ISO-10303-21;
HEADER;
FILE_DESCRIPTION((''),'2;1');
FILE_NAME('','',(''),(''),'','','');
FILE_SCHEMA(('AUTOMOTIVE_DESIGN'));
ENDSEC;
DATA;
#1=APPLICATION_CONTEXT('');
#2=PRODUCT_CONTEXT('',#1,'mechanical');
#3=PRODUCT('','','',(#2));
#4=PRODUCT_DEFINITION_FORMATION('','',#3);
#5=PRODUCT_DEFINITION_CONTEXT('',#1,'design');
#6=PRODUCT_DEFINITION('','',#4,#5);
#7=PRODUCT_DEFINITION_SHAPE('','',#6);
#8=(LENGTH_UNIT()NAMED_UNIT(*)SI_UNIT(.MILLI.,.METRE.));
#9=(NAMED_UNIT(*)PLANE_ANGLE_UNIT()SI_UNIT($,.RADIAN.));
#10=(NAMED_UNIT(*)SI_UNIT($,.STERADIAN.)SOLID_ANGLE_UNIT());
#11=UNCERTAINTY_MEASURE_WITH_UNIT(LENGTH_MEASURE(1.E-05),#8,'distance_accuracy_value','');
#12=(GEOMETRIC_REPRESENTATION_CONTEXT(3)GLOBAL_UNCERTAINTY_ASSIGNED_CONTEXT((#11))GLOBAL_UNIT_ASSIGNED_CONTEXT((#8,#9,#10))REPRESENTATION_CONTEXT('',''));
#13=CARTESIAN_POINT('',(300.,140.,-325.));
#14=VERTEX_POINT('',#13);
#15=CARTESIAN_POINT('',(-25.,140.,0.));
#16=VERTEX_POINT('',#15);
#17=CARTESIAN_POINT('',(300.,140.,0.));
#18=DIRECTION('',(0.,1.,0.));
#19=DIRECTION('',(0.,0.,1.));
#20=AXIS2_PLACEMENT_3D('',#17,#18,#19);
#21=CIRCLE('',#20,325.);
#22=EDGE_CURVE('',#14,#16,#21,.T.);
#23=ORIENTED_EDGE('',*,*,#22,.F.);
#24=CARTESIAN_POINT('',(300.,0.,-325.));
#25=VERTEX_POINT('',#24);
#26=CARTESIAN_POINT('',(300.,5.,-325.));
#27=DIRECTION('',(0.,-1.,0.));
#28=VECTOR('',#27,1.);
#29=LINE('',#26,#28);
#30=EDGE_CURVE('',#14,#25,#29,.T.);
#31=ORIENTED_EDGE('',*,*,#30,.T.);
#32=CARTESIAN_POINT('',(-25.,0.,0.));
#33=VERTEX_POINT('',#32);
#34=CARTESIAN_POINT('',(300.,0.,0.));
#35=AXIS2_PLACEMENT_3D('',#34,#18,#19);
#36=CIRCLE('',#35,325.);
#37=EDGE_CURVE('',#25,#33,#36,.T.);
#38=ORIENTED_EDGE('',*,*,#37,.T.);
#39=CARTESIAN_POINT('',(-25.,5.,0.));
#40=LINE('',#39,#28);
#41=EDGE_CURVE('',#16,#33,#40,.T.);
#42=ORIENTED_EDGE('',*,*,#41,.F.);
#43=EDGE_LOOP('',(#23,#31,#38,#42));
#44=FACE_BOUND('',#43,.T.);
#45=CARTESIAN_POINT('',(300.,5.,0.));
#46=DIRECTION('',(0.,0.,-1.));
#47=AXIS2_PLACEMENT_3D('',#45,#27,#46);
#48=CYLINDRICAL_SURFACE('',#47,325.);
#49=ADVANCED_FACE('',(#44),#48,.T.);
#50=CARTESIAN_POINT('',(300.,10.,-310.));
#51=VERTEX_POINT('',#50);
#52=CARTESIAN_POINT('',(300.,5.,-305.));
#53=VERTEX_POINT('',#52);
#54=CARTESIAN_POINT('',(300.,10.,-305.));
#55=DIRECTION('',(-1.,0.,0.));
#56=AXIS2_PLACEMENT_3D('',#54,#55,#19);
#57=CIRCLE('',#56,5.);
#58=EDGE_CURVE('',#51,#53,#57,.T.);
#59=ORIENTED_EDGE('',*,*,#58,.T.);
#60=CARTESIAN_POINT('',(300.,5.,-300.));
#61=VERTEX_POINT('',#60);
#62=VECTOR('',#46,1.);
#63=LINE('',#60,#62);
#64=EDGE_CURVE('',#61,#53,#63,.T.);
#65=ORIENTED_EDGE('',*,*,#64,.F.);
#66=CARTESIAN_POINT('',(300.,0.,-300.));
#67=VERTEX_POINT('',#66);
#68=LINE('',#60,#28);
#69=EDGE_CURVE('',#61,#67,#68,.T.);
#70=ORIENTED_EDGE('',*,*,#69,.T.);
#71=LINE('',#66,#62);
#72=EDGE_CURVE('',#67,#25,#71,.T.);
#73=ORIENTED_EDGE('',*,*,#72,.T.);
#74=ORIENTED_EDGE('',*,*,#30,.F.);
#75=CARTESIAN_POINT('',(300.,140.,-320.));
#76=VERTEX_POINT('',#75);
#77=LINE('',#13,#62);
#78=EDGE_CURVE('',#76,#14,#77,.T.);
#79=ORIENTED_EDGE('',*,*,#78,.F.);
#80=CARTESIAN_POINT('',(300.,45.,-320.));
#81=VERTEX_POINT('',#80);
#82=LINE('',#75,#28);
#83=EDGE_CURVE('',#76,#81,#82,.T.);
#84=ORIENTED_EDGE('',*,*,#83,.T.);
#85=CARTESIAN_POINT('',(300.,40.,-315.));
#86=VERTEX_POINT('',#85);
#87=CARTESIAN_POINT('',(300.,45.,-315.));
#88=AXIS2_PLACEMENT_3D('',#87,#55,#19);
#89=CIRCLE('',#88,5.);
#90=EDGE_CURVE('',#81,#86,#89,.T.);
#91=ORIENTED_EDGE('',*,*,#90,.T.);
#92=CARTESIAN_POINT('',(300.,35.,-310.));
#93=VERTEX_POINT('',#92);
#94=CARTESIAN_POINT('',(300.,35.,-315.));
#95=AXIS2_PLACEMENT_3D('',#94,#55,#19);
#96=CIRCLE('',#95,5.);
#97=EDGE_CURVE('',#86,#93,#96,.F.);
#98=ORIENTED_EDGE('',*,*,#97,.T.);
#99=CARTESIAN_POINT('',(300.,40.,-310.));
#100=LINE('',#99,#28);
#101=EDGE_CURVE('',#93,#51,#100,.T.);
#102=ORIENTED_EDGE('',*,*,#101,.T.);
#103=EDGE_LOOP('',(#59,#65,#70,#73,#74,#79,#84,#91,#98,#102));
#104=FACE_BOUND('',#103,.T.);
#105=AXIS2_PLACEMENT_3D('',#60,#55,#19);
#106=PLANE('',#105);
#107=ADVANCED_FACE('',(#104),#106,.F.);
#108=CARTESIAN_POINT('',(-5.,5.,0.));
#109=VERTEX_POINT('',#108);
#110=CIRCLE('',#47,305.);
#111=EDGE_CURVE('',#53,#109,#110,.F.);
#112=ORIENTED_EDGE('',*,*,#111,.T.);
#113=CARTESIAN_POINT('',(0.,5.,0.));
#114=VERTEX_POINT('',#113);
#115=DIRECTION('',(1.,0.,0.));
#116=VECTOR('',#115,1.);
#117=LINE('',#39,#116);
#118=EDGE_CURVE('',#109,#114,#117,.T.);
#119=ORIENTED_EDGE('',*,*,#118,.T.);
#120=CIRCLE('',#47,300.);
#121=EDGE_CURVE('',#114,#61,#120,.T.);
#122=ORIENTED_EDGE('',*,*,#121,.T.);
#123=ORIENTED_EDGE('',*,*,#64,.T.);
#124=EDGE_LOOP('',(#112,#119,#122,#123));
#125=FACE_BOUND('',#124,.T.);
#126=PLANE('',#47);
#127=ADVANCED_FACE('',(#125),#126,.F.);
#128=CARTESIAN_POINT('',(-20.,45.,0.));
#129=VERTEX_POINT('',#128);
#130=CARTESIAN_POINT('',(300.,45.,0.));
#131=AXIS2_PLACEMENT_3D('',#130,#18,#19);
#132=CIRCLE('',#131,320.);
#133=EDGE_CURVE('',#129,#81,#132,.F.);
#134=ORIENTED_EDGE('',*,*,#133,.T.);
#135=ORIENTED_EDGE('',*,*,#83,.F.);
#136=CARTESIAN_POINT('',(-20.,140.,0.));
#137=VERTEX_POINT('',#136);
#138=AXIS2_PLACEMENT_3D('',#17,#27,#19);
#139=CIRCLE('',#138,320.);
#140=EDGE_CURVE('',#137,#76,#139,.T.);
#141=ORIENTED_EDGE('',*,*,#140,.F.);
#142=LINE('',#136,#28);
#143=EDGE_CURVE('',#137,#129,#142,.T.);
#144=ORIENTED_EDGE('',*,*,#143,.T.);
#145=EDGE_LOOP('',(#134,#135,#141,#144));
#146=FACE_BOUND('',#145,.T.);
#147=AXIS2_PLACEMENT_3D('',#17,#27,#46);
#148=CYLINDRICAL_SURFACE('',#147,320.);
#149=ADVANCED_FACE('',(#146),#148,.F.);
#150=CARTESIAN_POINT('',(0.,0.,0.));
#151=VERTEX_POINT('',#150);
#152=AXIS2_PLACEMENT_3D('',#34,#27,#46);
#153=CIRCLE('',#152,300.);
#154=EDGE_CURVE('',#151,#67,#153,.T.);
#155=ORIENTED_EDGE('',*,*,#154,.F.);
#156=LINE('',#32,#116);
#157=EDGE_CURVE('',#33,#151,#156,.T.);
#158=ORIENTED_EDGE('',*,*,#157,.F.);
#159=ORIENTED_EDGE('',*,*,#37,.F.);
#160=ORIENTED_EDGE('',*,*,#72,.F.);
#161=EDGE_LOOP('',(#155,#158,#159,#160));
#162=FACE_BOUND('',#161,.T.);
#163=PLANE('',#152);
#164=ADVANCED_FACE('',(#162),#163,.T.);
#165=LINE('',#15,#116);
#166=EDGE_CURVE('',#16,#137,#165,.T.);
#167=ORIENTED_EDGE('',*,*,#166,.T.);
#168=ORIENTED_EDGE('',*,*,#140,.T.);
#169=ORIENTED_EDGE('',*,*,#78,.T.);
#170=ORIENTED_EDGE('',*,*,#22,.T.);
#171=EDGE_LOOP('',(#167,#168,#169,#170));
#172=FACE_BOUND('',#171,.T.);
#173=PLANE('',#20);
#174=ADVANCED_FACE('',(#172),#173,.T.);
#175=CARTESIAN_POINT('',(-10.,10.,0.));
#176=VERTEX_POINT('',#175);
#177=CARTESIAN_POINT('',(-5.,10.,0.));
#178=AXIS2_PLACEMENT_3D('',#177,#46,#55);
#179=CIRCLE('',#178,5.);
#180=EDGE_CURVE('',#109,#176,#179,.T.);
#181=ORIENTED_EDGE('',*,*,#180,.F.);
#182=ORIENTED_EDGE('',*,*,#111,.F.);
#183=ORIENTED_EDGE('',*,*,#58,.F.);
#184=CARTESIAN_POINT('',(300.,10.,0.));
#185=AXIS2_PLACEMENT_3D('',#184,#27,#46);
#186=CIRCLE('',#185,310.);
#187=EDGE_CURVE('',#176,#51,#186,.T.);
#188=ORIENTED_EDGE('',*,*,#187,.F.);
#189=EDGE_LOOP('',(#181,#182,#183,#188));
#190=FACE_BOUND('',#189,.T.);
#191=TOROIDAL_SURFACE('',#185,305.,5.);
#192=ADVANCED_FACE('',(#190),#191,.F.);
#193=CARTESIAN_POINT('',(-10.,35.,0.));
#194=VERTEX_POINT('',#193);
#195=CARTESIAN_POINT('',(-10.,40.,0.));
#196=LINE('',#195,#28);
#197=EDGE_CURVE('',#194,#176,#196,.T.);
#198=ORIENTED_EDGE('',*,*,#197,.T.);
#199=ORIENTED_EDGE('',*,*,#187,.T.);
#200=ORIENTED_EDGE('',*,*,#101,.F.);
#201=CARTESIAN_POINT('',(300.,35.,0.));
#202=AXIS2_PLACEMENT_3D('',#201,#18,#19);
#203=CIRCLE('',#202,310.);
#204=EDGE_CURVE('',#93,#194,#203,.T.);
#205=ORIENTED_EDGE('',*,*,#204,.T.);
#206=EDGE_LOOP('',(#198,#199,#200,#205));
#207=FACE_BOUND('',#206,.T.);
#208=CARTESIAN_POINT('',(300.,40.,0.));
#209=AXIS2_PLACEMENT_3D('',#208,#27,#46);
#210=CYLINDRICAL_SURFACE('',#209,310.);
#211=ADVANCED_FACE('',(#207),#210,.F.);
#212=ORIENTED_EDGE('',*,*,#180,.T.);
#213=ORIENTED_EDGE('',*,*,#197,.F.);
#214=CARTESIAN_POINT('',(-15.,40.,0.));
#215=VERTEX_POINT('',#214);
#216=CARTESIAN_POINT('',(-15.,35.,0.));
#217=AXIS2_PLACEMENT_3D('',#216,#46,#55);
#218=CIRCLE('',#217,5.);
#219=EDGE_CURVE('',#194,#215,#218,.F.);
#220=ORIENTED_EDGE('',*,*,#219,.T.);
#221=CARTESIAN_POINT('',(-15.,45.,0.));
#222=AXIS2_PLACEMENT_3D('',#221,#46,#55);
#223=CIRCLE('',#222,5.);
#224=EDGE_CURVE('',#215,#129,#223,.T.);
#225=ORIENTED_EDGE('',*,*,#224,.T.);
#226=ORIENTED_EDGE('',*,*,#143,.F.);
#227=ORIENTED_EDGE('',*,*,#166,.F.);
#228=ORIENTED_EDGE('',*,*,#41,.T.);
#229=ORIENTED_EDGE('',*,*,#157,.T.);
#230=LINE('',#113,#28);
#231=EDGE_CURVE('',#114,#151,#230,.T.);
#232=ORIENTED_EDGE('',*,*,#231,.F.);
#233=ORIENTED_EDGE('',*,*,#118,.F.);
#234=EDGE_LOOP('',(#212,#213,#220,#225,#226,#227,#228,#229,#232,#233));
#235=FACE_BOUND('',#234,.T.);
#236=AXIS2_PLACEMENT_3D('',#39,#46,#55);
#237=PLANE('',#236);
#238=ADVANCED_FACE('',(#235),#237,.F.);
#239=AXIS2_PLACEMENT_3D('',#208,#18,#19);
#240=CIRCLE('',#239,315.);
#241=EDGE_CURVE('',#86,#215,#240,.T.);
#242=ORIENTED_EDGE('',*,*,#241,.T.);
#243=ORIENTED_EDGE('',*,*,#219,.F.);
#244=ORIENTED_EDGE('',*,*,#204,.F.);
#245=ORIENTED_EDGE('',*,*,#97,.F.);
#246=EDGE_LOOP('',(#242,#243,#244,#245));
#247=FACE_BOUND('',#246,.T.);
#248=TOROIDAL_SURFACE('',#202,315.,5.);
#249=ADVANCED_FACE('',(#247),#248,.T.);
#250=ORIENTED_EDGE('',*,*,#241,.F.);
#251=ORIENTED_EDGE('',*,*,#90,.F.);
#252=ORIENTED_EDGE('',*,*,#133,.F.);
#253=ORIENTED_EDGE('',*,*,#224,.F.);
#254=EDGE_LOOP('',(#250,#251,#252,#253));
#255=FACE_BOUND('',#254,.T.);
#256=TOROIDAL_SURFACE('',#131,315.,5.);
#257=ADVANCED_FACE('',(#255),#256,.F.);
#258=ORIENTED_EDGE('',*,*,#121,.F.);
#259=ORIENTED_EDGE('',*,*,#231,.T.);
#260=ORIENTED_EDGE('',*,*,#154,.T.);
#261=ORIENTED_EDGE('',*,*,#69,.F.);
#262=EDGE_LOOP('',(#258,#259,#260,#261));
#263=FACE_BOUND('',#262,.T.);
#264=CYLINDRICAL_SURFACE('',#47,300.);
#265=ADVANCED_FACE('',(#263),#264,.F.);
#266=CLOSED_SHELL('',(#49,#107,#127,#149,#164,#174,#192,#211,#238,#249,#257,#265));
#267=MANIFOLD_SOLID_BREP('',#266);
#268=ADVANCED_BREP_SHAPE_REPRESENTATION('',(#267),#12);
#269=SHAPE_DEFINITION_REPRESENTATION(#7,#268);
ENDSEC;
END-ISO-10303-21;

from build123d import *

# Parameters (mm, degrees)
BOTTOM_LEVEL_DEPTH = 5
MID_LEVEL_DEPTH    = 35
GUARD_RAIL_DEPTH   = 100
ROUNDING_R         = 5


with BuildPart() as part:
    # Sketch1 → Bottom level (new body)
    with BuildSketch(Plane(origin=(0, 0, 0), x_dir=(1, 0, 0), z_dir=(0, 1, 0))):
        with BuildLine():
            Line((300, 300), (300, 325))
            ThreePointArc((300, 325), (70.190296114, 229.809703886), (-25, 0))
            Line((-25, 0), (0, 0))
            ThreePointArc((0, 0), (87.867965644, 212.132034356), (300, 300))
        make_face()
    extrude(amount=BOTTOM_LEVEL_DEPTH)

    # Sketch2 → Mid level (add)
    with BuildSketch(Plane(origin=(0, 5, 0), x_dir=(1, 0, 0), z_dir=(0, 1, 0))):
        with BuildLine():
            Line((-25, 0), (-10, 0))
            ThreePointArc((-10, 0), (80.796897832, 219.203102168), (300, 310))
            Line((300, 310), (300, 325))
            ThreePointArc((300, 325), (70.190296114, 229.809703886), (-25, 0))
        make_face()
    extrude(amount=MID_LEVEL_DEPTH)

    # Sketch3 → Guard rail (add)
    with BuildSketch(Plane(origin=(0, 40, 0), x_dir=(1, 0, 0), z_dir=(0, 1, 0))):
        with BuildLine():
            Line((-25, 0), (-20, 0))
            ThreePointArc((-20, 0), (73.72583002, 226.27416998), (300, 320))
            Line((300, 320), (300, 325))
            ThreePointArc((300, 325), (70.190296114, 229.809703886), (-25, 0))
        make_face()
    extrude(amount=GUARD_RAIL_DEPTH)

    # Rounding
    rounding_edges = [part.edges().sort_by_distance(p)[0] for p in [
        (80.796897832, 5, -219.203102168),
        (80.796897832, 40, -219.203102168),
        (73.72583002, 40, -226.27416998),
    ]]
    fillet(rounding_edges, radius=ROUNDING_R - 0.0001)  # a hair under: the kernel refuses the full size


solid = part.part
